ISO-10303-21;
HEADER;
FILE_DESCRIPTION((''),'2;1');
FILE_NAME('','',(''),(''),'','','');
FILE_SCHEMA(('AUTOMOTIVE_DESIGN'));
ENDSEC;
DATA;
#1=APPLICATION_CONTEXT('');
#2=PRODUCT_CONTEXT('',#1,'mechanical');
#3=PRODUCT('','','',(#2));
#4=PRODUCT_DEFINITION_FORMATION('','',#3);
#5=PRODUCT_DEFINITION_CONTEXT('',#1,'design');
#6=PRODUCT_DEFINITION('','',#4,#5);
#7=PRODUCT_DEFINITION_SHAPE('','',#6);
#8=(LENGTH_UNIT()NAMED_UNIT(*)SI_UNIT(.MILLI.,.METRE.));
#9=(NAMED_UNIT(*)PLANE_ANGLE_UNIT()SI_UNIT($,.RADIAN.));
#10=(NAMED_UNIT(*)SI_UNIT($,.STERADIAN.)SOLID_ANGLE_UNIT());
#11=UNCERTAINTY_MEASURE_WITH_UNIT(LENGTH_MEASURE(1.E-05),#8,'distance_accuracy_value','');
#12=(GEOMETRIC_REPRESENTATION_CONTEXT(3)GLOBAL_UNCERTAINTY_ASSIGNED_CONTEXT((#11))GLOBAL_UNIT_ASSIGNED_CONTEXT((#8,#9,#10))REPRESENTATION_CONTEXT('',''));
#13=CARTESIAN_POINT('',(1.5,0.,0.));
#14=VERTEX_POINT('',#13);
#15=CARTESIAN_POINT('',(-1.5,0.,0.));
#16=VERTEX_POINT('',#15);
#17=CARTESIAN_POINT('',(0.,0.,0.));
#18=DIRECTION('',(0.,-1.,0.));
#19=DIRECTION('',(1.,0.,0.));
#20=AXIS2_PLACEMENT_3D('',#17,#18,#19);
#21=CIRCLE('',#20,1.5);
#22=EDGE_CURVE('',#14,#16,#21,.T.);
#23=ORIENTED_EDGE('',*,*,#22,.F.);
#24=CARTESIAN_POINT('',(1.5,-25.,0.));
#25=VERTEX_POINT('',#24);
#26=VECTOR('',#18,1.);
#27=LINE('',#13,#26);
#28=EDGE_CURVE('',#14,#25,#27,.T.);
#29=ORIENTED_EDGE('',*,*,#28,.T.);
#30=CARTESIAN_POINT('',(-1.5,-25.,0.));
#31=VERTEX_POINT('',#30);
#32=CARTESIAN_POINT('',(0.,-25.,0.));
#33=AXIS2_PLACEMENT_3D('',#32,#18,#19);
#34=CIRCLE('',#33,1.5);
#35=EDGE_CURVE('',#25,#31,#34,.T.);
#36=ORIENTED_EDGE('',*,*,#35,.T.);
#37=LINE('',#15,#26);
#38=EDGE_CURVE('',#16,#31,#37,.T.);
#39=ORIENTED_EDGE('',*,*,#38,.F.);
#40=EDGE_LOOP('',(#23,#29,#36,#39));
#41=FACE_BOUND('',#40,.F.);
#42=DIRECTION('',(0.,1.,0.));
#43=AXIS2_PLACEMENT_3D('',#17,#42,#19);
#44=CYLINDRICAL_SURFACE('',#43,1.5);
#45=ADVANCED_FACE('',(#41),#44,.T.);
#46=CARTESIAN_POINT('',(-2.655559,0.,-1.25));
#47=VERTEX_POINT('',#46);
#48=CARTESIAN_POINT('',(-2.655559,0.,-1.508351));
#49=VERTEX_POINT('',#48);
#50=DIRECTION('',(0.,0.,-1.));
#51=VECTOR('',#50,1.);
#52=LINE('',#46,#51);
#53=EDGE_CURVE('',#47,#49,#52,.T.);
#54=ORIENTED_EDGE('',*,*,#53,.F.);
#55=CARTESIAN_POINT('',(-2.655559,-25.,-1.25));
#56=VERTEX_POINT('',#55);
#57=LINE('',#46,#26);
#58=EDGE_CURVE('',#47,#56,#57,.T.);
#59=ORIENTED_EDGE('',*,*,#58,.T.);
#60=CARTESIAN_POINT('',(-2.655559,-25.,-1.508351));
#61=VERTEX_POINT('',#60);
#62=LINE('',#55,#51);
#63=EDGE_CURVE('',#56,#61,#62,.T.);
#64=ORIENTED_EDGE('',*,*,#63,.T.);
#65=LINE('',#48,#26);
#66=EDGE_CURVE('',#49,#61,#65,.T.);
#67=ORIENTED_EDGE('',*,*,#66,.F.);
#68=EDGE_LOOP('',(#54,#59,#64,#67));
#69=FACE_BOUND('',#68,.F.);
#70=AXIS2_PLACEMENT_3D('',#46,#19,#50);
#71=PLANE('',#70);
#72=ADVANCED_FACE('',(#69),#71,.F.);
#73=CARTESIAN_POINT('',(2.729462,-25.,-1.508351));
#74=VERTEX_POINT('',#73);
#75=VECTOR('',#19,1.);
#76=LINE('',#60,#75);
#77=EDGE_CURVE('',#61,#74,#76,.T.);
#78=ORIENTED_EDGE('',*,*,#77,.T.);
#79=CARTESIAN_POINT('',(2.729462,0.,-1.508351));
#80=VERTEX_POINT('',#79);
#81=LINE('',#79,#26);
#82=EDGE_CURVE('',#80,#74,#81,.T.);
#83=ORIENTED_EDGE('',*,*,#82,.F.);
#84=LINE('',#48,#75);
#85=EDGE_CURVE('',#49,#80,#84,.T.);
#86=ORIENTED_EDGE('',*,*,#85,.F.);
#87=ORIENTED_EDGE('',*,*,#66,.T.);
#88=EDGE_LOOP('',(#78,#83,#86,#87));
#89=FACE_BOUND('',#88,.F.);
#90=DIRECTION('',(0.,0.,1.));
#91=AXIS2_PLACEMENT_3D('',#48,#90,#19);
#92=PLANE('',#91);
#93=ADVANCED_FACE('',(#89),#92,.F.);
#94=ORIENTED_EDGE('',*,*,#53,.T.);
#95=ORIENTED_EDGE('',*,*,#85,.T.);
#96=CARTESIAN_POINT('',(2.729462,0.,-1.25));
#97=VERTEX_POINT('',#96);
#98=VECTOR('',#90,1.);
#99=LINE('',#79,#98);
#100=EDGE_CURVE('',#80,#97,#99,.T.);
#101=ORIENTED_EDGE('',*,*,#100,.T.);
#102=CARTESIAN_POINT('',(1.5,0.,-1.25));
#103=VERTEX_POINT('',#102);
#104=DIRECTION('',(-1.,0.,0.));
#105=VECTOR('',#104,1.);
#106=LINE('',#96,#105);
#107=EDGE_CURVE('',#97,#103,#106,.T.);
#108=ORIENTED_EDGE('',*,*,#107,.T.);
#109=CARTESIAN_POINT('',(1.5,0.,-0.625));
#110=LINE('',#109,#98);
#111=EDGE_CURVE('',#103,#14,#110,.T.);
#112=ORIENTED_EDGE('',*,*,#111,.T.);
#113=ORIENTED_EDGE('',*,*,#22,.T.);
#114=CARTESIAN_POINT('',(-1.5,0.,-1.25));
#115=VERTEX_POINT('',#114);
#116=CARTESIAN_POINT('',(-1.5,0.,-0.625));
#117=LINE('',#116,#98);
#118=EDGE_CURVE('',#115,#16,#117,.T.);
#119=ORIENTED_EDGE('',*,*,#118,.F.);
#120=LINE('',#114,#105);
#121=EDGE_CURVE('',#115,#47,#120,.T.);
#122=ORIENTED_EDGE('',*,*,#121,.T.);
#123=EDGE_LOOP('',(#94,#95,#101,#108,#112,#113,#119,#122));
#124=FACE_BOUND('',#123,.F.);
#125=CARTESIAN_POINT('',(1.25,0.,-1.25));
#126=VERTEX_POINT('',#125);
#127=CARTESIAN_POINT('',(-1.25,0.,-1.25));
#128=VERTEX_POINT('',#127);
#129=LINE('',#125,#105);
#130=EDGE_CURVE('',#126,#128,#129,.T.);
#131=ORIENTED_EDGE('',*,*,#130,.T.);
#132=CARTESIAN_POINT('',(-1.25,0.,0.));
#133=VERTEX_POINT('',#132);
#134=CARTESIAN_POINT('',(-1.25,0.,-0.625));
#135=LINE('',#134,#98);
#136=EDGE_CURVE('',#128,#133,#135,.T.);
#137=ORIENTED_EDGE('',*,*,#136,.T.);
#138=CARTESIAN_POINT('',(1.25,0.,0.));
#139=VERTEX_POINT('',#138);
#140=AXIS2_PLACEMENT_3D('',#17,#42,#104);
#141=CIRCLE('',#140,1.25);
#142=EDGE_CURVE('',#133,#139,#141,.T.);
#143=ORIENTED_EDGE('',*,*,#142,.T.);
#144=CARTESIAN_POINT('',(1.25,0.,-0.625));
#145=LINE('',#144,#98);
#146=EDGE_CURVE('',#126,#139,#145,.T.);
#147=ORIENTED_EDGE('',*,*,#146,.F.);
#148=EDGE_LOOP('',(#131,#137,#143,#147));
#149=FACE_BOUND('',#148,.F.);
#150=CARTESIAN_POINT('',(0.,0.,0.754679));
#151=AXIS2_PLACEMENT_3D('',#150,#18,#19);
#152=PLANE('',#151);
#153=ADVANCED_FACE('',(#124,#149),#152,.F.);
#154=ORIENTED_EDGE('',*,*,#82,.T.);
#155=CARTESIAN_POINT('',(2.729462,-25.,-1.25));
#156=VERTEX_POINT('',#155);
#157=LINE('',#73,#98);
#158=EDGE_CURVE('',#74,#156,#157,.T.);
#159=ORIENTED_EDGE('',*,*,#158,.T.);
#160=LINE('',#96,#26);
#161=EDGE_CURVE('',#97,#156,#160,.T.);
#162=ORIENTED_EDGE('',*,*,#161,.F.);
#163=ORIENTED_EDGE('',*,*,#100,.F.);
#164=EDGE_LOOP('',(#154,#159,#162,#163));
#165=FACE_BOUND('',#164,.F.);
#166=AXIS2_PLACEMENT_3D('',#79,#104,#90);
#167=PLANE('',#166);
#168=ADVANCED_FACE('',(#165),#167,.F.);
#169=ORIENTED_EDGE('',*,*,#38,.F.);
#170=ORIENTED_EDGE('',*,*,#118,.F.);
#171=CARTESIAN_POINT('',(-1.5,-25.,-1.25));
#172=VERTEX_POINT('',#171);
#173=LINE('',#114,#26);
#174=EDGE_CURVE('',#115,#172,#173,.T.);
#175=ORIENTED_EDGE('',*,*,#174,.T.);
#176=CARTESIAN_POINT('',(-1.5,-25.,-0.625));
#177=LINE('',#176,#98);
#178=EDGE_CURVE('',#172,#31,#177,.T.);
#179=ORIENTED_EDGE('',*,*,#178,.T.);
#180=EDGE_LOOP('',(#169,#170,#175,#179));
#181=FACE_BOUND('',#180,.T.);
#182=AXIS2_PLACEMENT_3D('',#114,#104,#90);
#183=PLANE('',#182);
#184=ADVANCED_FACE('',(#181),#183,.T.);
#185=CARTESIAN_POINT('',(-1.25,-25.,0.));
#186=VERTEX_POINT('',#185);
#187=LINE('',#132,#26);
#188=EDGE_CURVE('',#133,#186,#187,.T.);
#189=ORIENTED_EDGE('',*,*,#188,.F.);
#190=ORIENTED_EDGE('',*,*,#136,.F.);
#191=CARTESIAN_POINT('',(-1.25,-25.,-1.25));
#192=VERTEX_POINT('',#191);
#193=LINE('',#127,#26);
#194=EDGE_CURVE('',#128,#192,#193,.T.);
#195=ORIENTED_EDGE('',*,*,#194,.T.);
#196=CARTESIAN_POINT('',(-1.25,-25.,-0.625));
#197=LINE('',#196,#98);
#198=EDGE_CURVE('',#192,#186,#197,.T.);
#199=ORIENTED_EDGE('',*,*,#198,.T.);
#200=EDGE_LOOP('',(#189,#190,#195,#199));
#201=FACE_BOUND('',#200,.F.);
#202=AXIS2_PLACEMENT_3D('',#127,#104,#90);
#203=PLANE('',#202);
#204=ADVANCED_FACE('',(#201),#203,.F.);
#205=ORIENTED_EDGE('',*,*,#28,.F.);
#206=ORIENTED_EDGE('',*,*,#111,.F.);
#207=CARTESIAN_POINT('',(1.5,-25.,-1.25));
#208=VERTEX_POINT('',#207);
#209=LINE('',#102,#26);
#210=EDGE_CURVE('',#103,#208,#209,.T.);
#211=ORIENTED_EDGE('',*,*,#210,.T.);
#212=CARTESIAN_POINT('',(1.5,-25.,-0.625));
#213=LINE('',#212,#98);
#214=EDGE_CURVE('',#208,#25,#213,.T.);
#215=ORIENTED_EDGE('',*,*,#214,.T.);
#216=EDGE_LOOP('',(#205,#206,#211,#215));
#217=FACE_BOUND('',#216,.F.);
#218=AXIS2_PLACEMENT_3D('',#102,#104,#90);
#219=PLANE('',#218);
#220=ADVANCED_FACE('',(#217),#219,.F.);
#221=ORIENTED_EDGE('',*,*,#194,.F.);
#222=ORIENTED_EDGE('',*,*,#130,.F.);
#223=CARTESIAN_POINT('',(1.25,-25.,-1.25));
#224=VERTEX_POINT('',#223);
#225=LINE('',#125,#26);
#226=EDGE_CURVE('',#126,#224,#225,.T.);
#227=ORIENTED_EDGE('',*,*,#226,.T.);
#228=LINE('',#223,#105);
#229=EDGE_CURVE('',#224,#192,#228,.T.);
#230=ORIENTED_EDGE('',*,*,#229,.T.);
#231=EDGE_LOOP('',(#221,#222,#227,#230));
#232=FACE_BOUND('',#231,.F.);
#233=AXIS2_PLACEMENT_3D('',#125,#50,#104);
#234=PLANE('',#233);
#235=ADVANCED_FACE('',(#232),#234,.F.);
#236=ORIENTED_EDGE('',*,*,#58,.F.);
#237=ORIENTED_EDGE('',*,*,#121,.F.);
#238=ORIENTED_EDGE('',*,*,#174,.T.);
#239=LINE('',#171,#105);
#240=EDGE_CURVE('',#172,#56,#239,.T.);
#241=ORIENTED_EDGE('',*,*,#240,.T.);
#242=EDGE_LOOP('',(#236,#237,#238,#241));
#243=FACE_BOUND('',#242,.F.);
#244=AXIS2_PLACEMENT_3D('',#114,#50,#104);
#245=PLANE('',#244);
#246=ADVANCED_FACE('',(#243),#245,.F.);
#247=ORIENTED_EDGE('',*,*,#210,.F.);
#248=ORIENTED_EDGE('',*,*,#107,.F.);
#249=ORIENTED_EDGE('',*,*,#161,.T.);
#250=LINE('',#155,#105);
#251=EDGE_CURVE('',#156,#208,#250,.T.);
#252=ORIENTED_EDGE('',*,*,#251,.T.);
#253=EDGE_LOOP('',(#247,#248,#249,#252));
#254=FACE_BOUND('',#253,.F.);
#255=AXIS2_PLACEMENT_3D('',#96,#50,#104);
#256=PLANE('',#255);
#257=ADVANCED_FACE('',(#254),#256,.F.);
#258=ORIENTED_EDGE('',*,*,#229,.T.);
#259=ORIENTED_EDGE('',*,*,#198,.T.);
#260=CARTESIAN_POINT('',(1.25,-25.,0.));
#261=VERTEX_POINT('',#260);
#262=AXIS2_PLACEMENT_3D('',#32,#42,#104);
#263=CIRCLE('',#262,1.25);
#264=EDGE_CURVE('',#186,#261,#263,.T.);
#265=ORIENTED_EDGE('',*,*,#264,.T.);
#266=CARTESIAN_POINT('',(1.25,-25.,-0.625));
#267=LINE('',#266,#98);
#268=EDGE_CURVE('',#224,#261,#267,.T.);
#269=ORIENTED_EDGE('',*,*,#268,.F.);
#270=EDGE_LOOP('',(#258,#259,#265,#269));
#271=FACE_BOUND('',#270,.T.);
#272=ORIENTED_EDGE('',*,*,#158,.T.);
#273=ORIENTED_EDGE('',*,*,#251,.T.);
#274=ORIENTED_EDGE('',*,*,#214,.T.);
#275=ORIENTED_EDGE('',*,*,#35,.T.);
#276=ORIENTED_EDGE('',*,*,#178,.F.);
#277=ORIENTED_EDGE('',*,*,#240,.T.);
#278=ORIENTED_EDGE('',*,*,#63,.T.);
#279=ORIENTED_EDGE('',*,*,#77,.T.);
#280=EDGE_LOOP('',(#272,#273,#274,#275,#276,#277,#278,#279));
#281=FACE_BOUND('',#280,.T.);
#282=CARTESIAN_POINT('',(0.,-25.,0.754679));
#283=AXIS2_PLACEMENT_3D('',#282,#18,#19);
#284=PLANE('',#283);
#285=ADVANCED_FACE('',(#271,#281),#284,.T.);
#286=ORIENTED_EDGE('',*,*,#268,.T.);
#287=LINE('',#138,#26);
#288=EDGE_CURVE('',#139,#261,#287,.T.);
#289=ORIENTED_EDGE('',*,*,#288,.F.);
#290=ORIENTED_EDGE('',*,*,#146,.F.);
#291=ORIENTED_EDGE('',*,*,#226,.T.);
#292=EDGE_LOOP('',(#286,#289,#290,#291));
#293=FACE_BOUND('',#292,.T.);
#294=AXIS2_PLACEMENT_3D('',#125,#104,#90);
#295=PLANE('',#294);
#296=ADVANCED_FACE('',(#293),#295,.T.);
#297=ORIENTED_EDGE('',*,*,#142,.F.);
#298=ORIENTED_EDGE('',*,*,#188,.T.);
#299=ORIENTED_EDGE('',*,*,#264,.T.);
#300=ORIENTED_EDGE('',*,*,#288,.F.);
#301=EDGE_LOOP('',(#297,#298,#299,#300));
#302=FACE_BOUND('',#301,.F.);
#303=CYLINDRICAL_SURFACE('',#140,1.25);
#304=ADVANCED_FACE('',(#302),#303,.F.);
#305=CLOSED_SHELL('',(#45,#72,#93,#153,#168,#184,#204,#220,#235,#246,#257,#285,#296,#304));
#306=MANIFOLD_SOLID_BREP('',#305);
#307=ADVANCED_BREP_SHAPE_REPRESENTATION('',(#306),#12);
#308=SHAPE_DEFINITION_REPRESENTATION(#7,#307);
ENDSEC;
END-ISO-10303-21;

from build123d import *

# Parameters (mm, degrees)
F0_W     = 0.25
F0_H     = 1.25
F1_DEPTH = 25


# Not quite as in the source:
# - a feature names something its author has since deleted; it is built from what else it names


with BuildPart() as f1:
    # F0 (on Front) → F1 (new body)
    with BuildSketch(Plane.XZ):
        with BuildLine():
            ThreePointArc((-1.25, 0), (0, 1.25), (1.25, 0))
            Line((1.25, 0), (1.5, 0))
            ThreePointArc((1.5, 0), (0, 1.5), (-1.5, 0))
            Line((-1.5, 0), (-1.25, 0))
        make_face()
        with Locations((1.375, -0.625)):
            Rectangle(F0_W, F0_H)
        with Locations((-1.375, -0.625)):
            Rectangle(F0_W, F0_H)
        Polygon((1.5, -1.25), (1.25, -1.25), (-1.25, -1.25), (-1.5, -1.25), (-2.6555589866, -1.25), (-2.6555589866, -1.5083510661), (2.7294615284, -1.5083510661), (2.7294615284, -1.25), align=None)
    extrude(amount=F1_DEPTH)


solid = f1.part
